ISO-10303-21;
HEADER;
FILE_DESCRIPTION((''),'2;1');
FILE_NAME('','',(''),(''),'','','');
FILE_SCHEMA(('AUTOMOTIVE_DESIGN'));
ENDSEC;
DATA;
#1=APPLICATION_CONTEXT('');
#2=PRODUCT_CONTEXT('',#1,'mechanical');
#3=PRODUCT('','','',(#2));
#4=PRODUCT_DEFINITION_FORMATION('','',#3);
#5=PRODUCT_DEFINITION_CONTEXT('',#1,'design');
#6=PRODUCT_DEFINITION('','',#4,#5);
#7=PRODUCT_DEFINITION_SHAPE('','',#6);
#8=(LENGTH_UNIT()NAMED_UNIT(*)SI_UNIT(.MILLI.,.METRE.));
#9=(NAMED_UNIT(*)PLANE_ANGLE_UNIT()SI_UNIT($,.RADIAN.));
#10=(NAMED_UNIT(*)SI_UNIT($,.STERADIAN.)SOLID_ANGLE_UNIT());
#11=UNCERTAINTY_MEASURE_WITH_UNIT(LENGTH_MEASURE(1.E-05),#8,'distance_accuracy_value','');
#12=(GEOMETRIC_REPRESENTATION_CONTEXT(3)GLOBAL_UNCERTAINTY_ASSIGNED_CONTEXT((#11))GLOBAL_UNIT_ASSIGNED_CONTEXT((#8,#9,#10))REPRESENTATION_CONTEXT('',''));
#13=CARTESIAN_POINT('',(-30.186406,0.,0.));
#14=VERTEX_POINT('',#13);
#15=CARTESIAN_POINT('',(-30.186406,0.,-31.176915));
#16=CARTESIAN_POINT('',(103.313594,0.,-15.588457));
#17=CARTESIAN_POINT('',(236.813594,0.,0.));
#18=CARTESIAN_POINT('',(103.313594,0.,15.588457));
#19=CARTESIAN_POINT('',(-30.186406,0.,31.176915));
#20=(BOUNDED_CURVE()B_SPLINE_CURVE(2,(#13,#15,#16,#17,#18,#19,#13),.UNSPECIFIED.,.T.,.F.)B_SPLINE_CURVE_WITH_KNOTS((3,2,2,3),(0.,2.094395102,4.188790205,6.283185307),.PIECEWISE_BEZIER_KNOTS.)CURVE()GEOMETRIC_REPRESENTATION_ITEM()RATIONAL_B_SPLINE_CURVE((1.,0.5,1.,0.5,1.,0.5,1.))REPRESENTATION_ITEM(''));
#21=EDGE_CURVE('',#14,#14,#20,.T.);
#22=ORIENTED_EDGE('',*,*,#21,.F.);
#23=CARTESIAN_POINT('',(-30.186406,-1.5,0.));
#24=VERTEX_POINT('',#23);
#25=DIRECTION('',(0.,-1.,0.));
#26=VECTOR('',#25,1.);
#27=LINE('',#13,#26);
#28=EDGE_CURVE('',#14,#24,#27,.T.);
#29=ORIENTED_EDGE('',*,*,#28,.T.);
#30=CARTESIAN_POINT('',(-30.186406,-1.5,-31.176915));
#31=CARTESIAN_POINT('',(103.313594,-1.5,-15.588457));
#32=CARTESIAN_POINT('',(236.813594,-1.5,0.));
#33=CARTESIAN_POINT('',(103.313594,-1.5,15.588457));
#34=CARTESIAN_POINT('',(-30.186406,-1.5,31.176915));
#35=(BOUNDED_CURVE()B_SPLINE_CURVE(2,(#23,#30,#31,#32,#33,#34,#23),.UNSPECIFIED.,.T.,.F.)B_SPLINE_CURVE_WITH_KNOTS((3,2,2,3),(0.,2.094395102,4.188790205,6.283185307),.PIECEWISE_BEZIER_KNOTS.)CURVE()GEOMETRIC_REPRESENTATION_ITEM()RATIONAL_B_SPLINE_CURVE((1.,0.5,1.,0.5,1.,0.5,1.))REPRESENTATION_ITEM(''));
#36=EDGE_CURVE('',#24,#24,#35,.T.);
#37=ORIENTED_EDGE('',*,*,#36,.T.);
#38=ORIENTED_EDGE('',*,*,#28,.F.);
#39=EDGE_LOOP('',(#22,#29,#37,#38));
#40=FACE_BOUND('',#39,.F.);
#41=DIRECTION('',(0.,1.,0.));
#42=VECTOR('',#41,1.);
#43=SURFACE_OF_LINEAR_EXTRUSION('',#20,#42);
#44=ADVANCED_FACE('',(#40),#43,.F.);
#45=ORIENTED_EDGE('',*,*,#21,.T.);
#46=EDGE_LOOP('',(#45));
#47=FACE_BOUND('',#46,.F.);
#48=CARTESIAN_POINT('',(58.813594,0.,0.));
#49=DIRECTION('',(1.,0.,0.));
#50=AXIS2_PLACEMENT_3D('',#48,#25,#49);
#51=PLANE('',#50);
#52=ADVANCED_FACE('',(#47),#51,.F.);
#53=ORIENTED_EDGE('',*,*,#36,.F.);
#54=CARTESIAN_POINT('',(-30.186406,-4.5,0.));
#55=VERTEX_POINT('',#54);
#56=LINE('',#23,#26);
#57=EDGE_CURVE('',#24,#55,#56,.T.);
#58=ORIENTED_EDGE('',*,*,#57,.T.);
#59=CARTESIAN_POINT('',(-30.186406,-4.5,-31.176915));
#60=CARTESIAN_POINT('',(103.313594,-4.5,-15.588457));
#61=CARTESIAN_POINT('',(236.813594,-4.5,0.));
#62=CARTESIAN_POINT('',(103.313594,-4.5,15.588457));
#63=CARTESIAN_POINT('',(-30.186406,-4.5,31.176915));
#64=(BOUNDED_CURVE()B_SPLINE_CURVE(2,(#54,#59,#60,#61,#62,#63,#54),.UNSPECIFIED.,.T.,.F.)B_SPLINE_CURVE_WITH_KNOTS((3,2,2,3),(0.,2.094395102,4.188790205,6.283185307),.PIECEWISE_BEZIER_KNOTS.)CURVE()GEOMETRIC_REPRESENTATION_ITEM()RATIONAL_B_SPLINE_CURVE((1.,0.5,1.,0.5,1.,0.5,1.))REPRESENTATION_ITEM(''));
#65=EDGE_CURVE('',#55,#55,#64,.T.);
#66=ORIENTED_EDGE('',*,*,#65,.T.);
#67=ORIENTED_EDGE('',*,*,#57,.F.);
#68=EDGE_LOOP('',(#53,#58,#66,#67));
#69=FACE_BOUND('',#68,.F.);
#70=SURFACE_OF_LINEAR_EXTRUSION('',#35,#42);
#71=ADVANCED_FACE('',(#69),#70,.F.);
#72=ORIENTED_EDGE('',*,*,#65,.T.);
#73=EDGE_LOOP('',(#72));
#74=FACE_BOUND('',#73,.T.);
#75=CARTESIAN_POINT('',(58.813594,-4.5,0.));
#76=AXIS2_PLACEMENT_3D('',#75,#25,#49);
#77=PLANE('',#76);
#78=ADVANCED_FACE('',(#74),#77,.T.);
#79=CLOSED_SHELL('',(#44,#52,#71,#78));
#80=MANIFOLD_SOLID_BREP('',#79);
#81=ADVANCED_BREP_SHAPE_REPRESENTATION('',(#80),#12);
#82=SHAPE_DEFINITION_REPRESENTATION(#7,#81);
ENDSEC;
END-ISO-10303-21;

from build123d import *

# Parameters (mm, degrees)
F1_DEPTH = 1.5
F3_DEPTH = 3


# Not quite as in the source:
# - a feature names something its author has since deleted; it is built from what else it names


with BuildPart() as f1:
    # F0 (on Front) → F1 (new body)
    with BuildSketch(Plane.XZ):
        with BuildLine():
            add(Edge.make_bspline(
                [(-30.1864057183, 0), (-30.1864057183, -31.1769145362), (103.3135942817, -15.5884572681), (236.8135942817, 0), (103.3135942817, 15.5884572681), (-30.1864057183, 31.1769145362), (-30.1864057183, 0)],
                knots=[0, 0, 0, 2.0943951024, 2.0943951024, 4.1887902048, 4.1887902048, 6.2831853072, 6.2831853072, 6.2831853072], degree=2, weights=[1, 0.5, 1, 0.5, 1, 0.5, 1]))
        make_face()
    extrude(amount=F1_DEPTH)

    # F3 (add): a face of the model
    f3_faces = [f1.faces().sort_by_distance(p)[0] for p in [
        (58.705611849, -1.5, 0),
    ]]
    extrude(f3_faces, amount=F3_DEPTH)


solid = f1.part
